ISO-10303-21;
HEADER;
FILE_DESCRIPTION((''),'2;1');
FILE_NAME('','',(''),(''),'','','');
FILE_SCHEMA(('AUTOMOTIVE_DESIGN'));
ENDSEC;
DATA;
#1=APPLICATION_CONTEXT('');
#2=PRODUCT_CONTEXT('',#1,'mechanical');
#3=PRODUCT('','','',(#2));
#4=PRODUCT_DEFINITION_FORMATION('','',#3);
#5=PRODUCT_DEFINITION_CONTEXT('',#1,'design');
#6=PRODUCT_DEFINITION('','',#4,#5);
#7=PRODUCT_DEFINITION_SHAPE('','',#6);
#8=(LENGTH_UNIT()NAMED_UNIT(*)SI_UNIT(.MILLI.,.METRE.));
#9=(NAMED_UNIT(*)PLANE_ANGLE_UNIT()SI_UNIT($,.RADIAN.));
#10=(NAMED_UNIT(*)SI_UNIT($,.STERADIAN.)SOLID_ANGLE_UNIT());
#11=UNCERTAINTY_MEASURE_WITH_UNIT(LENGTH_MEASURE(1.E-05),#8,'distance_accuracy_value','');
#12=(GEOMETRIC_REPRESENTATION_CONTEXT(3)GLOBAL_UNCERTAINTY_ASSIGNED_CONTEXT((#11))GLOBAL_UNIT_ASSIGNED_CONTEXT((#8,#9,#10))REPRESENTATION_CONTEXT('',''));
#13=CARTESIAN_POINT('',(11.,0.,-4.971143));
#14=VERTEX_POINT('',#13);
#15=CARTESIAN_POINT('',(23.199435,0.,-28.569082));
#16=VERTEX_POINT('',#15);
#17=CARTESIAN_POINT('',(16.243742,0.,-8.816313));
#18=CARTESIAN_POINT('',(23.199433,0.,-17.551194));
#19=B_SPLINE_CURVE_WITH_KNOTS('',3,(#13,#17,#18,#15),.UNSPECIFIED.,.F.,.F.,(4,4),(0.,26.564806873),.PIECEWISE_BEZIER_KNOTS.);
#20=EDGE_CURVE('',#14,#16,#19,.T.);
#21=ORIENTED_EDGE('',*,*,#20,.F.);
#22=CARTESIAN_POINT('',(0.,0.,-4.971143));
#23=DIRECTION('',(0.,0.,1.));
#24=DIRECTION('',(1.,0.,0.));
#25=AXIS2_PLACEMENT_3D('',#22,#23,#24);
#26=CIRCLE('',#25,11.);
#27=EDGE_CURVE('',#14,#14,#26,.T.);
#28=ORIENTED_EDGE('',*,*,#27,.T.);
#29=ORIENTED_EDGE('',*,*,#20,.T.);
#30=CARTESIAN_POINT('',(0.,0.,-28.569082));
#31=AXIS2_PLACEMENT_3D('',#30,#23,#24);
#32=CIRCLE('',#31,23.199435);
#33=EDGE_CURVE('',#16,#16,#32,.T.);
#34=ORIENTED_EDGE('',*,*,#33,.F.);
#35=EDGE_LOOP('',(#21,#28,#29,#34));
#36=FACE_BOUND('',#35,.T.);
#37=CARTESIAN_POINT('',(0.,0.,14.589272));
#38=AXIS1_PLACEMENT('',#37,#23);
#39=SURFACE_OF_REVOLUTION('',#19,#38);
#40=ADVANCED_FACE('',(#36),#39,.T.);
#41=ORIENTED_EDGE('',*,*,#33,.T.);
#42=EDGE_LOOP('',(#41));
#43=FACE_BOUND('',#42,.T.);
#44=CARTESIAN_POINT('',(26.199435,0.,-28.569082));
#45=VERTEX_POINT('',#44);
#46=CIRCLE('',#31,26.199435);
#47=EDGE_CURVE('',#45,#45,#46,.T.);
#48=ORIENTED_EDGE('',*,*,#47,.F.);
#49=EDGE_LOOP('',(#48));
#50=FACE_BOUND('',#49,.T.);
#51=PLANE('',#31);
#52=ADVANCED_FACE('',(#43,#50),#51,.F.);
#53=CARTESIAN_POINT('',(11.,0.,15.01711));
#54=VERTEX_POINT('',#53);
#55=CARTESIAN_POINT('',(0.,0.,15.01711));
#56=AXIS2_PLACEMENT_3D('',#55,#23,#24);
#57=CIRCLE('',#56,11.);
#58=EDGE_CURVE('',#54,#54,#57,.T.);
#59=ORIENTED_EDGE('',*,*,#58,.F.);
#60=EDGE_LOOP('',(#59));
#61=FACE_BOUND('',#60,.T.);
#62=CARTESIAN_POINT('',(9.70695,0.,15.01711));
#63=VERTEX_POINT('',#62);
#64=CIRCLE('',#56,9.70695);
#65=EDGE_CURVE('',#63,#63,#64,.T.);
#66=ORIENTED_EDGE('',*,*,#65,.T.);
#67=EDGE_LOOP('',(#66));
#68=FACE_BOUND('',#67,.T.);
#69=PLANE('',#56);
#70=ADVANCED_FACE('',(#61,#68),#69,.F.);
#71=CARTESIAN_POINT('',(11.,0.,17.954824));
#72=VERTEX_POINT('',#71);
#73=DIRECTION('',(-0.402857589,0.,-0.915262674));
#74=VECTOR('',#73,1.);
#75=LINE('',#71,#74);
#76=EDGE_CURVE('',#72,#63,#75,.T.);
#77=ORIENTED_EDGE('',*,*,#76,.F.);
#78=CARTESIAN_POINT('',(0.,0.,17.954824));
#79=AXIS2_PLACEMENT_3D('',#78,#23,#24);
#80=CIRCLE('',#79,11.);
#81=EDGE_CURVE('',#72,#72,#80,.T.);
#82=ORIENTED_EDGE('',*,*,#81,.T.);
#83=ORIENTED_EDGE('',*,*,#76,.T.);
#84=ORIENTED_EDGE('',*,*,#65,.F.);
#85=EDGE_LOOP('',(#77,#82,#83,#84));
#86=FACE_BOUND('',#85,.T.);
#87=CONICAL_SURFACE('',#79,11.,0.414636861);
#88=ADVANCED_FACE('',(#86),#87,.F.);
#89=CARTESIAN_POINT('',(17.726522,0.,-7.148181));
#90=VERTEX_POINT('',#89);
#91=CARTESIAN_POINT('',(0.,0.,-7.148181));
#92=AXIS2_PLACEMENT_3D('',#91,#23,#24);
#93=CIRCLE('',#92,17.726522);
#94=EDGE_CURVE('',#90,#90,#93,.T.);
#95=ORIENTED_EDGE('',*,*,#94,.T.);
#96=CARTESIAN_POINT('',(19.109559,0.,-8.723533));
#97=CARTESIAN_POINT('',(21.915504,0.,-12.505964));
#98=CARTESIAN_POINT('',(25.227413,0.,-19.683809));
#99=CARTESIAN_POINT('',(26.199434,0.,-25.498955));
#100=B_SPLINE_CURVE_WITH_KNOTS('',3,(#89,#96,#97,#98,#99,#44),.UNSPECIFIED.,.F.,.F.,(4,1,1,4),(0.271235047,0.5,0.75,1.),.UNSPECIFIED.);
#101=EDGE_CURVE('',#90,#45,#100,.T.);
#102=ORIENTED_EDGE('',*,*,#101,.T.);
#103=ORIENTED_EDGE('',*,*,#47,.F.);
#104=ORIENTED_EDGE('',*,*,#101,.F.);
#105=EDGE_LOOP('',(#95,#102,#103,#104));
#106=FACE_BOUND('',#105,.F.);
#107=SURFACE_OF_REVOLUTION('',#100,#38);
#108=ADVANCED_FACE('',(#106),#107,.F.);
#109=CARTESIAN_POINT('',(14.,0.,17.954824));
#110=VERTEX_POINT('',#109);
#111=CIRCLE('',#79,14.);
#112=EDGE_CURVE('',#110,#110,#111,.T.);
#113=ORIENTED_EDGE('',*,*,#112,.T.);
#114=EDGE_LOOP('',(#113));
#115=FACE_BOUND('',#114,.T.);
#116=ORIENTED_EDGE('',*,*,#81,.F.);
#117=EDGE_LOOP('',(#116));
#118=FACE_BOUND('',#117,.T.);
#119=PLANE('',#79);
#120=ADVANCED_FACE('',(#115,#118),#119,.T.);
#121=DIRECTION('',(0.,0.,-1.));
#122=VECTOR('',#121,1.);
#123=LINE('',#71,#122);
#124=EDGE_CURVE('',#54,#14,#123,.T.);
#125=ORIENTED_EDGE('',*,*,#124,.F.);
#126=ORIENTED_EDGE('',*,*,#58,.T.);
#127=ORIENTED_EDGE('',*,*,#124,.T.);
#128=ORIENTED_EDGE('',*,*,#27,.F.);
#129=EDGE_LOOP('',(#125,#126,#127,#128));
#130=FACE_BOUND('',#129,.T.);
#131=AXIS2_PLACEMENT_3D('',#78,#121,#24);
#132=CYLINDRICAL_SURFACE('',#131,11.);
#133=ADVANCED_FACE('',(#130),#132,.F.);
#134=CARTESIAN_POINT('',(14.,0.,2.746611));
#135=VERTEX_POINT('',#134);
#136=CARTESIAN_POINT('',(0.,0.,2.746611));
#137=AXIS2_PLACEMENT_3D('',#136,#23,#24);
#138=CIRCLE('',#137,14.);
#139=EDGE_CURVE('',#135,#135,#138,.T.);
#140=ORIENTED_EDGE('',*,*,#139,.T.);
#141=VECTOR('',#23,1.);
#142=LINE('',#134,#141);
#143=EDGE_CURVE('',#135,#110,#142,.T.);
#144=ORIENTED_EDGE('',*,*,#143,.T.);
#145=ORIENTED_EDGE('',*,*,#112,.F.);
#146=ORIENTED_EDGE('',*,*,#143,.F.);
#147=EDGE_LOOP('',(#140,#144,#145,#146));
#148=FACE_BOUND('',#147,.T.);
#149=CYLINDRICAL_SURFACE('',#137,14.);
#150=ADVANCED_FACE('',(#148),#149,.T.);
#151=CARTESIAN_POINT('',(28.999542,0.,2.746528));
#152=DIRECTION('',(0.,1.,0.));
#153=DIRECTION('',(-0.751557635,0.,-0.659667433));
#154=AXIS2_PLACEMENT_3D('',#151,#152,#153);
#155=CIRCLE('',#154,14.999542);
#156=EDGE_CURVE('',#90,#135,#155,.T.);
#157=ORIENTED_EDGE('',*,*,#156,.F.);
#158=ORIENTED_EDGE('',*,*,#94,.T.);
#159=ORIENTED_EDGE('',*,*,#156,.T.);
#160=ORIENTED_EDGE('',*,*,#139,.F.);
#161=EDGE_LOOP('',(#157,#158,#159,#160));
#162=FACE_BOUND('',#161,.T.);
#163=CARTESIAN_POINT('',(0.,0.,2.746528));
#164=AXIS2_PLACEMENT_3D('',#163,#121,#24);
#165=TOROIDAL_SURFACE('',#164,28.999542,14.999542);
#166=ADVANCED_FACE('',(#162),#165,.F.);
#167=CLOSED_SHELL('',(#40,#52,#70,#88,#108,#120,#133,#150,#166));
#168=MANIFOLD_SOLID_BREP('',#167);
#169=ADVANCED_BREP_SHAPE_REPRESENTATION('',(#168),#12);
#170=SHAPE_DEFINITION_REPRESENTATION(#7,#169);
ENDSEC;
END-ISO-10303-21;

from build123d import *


# Not quite as in the source:
# - ends of sketch curves that miss each other by under 0.0002 mm in the source are joined
# - the dataset's text gives a spline's control points without its knots; the knots are read off the source's solid


with BuildPart() as f1:
    # F0 (on Front) → F1 (revolve)
    with BuildSketch(Plane.XZ):
        Polygon((9.7069498152, 15.0171099231), (11, 15.0171099231), (11, 17.9548243945), align=None)
        with BuildLine():
            Line((11, 15.0171099231), (11, 10.5107510462))
            Line((11, 10.5107510462), (11, -4.9711427956))
            add(Edge.make_bspline(
                [(11, -4.9711427956), (16.2437419004, -8.8163125959), (23.19943312, -17.5511940928), (23.1994349799, -28.5690823316)],
                knots=[0, 0, 0, 0, 26.5648068726, 26.5648068726, 26.5648068726, 26.5648068726], degree=3))
            Line((23.1994349799, -28.5690823316), (26.1994349799, -28.5690823316))
            add(Edge.make_bspline(
                [(17.7265217002, -7.1481812805), (19.1095590047, -8.7235328339), (21.9155043848, -12.5059639132), (25.2274131623, -19.6838085881), (26.1994344616, -25.4989553681), (26.1994349799, -28.5690823316)],
                knots=[0.2712350474, 0.2712350474, 0.2712350474, 0.2712350474, 0.5, 0.75, 1, 1, 1, 1], degree=3))
            ThreePointArc((17.7265217002, -7.1481812805), (14.962499563, -2.5400303169), (14, 2.7466114794))
            Line((14, 2.7466114794), (14, 17.9548243945))
            Line((14, 17.9548243945), (11, 17.9548243945))
            Line((11, 17.9548243945), (11, 15.0171099231))
        make_face()
    revolve(axis=Axis((0, 0, 14.5892715082), (0, 0, 1)))


solid = f1.part
